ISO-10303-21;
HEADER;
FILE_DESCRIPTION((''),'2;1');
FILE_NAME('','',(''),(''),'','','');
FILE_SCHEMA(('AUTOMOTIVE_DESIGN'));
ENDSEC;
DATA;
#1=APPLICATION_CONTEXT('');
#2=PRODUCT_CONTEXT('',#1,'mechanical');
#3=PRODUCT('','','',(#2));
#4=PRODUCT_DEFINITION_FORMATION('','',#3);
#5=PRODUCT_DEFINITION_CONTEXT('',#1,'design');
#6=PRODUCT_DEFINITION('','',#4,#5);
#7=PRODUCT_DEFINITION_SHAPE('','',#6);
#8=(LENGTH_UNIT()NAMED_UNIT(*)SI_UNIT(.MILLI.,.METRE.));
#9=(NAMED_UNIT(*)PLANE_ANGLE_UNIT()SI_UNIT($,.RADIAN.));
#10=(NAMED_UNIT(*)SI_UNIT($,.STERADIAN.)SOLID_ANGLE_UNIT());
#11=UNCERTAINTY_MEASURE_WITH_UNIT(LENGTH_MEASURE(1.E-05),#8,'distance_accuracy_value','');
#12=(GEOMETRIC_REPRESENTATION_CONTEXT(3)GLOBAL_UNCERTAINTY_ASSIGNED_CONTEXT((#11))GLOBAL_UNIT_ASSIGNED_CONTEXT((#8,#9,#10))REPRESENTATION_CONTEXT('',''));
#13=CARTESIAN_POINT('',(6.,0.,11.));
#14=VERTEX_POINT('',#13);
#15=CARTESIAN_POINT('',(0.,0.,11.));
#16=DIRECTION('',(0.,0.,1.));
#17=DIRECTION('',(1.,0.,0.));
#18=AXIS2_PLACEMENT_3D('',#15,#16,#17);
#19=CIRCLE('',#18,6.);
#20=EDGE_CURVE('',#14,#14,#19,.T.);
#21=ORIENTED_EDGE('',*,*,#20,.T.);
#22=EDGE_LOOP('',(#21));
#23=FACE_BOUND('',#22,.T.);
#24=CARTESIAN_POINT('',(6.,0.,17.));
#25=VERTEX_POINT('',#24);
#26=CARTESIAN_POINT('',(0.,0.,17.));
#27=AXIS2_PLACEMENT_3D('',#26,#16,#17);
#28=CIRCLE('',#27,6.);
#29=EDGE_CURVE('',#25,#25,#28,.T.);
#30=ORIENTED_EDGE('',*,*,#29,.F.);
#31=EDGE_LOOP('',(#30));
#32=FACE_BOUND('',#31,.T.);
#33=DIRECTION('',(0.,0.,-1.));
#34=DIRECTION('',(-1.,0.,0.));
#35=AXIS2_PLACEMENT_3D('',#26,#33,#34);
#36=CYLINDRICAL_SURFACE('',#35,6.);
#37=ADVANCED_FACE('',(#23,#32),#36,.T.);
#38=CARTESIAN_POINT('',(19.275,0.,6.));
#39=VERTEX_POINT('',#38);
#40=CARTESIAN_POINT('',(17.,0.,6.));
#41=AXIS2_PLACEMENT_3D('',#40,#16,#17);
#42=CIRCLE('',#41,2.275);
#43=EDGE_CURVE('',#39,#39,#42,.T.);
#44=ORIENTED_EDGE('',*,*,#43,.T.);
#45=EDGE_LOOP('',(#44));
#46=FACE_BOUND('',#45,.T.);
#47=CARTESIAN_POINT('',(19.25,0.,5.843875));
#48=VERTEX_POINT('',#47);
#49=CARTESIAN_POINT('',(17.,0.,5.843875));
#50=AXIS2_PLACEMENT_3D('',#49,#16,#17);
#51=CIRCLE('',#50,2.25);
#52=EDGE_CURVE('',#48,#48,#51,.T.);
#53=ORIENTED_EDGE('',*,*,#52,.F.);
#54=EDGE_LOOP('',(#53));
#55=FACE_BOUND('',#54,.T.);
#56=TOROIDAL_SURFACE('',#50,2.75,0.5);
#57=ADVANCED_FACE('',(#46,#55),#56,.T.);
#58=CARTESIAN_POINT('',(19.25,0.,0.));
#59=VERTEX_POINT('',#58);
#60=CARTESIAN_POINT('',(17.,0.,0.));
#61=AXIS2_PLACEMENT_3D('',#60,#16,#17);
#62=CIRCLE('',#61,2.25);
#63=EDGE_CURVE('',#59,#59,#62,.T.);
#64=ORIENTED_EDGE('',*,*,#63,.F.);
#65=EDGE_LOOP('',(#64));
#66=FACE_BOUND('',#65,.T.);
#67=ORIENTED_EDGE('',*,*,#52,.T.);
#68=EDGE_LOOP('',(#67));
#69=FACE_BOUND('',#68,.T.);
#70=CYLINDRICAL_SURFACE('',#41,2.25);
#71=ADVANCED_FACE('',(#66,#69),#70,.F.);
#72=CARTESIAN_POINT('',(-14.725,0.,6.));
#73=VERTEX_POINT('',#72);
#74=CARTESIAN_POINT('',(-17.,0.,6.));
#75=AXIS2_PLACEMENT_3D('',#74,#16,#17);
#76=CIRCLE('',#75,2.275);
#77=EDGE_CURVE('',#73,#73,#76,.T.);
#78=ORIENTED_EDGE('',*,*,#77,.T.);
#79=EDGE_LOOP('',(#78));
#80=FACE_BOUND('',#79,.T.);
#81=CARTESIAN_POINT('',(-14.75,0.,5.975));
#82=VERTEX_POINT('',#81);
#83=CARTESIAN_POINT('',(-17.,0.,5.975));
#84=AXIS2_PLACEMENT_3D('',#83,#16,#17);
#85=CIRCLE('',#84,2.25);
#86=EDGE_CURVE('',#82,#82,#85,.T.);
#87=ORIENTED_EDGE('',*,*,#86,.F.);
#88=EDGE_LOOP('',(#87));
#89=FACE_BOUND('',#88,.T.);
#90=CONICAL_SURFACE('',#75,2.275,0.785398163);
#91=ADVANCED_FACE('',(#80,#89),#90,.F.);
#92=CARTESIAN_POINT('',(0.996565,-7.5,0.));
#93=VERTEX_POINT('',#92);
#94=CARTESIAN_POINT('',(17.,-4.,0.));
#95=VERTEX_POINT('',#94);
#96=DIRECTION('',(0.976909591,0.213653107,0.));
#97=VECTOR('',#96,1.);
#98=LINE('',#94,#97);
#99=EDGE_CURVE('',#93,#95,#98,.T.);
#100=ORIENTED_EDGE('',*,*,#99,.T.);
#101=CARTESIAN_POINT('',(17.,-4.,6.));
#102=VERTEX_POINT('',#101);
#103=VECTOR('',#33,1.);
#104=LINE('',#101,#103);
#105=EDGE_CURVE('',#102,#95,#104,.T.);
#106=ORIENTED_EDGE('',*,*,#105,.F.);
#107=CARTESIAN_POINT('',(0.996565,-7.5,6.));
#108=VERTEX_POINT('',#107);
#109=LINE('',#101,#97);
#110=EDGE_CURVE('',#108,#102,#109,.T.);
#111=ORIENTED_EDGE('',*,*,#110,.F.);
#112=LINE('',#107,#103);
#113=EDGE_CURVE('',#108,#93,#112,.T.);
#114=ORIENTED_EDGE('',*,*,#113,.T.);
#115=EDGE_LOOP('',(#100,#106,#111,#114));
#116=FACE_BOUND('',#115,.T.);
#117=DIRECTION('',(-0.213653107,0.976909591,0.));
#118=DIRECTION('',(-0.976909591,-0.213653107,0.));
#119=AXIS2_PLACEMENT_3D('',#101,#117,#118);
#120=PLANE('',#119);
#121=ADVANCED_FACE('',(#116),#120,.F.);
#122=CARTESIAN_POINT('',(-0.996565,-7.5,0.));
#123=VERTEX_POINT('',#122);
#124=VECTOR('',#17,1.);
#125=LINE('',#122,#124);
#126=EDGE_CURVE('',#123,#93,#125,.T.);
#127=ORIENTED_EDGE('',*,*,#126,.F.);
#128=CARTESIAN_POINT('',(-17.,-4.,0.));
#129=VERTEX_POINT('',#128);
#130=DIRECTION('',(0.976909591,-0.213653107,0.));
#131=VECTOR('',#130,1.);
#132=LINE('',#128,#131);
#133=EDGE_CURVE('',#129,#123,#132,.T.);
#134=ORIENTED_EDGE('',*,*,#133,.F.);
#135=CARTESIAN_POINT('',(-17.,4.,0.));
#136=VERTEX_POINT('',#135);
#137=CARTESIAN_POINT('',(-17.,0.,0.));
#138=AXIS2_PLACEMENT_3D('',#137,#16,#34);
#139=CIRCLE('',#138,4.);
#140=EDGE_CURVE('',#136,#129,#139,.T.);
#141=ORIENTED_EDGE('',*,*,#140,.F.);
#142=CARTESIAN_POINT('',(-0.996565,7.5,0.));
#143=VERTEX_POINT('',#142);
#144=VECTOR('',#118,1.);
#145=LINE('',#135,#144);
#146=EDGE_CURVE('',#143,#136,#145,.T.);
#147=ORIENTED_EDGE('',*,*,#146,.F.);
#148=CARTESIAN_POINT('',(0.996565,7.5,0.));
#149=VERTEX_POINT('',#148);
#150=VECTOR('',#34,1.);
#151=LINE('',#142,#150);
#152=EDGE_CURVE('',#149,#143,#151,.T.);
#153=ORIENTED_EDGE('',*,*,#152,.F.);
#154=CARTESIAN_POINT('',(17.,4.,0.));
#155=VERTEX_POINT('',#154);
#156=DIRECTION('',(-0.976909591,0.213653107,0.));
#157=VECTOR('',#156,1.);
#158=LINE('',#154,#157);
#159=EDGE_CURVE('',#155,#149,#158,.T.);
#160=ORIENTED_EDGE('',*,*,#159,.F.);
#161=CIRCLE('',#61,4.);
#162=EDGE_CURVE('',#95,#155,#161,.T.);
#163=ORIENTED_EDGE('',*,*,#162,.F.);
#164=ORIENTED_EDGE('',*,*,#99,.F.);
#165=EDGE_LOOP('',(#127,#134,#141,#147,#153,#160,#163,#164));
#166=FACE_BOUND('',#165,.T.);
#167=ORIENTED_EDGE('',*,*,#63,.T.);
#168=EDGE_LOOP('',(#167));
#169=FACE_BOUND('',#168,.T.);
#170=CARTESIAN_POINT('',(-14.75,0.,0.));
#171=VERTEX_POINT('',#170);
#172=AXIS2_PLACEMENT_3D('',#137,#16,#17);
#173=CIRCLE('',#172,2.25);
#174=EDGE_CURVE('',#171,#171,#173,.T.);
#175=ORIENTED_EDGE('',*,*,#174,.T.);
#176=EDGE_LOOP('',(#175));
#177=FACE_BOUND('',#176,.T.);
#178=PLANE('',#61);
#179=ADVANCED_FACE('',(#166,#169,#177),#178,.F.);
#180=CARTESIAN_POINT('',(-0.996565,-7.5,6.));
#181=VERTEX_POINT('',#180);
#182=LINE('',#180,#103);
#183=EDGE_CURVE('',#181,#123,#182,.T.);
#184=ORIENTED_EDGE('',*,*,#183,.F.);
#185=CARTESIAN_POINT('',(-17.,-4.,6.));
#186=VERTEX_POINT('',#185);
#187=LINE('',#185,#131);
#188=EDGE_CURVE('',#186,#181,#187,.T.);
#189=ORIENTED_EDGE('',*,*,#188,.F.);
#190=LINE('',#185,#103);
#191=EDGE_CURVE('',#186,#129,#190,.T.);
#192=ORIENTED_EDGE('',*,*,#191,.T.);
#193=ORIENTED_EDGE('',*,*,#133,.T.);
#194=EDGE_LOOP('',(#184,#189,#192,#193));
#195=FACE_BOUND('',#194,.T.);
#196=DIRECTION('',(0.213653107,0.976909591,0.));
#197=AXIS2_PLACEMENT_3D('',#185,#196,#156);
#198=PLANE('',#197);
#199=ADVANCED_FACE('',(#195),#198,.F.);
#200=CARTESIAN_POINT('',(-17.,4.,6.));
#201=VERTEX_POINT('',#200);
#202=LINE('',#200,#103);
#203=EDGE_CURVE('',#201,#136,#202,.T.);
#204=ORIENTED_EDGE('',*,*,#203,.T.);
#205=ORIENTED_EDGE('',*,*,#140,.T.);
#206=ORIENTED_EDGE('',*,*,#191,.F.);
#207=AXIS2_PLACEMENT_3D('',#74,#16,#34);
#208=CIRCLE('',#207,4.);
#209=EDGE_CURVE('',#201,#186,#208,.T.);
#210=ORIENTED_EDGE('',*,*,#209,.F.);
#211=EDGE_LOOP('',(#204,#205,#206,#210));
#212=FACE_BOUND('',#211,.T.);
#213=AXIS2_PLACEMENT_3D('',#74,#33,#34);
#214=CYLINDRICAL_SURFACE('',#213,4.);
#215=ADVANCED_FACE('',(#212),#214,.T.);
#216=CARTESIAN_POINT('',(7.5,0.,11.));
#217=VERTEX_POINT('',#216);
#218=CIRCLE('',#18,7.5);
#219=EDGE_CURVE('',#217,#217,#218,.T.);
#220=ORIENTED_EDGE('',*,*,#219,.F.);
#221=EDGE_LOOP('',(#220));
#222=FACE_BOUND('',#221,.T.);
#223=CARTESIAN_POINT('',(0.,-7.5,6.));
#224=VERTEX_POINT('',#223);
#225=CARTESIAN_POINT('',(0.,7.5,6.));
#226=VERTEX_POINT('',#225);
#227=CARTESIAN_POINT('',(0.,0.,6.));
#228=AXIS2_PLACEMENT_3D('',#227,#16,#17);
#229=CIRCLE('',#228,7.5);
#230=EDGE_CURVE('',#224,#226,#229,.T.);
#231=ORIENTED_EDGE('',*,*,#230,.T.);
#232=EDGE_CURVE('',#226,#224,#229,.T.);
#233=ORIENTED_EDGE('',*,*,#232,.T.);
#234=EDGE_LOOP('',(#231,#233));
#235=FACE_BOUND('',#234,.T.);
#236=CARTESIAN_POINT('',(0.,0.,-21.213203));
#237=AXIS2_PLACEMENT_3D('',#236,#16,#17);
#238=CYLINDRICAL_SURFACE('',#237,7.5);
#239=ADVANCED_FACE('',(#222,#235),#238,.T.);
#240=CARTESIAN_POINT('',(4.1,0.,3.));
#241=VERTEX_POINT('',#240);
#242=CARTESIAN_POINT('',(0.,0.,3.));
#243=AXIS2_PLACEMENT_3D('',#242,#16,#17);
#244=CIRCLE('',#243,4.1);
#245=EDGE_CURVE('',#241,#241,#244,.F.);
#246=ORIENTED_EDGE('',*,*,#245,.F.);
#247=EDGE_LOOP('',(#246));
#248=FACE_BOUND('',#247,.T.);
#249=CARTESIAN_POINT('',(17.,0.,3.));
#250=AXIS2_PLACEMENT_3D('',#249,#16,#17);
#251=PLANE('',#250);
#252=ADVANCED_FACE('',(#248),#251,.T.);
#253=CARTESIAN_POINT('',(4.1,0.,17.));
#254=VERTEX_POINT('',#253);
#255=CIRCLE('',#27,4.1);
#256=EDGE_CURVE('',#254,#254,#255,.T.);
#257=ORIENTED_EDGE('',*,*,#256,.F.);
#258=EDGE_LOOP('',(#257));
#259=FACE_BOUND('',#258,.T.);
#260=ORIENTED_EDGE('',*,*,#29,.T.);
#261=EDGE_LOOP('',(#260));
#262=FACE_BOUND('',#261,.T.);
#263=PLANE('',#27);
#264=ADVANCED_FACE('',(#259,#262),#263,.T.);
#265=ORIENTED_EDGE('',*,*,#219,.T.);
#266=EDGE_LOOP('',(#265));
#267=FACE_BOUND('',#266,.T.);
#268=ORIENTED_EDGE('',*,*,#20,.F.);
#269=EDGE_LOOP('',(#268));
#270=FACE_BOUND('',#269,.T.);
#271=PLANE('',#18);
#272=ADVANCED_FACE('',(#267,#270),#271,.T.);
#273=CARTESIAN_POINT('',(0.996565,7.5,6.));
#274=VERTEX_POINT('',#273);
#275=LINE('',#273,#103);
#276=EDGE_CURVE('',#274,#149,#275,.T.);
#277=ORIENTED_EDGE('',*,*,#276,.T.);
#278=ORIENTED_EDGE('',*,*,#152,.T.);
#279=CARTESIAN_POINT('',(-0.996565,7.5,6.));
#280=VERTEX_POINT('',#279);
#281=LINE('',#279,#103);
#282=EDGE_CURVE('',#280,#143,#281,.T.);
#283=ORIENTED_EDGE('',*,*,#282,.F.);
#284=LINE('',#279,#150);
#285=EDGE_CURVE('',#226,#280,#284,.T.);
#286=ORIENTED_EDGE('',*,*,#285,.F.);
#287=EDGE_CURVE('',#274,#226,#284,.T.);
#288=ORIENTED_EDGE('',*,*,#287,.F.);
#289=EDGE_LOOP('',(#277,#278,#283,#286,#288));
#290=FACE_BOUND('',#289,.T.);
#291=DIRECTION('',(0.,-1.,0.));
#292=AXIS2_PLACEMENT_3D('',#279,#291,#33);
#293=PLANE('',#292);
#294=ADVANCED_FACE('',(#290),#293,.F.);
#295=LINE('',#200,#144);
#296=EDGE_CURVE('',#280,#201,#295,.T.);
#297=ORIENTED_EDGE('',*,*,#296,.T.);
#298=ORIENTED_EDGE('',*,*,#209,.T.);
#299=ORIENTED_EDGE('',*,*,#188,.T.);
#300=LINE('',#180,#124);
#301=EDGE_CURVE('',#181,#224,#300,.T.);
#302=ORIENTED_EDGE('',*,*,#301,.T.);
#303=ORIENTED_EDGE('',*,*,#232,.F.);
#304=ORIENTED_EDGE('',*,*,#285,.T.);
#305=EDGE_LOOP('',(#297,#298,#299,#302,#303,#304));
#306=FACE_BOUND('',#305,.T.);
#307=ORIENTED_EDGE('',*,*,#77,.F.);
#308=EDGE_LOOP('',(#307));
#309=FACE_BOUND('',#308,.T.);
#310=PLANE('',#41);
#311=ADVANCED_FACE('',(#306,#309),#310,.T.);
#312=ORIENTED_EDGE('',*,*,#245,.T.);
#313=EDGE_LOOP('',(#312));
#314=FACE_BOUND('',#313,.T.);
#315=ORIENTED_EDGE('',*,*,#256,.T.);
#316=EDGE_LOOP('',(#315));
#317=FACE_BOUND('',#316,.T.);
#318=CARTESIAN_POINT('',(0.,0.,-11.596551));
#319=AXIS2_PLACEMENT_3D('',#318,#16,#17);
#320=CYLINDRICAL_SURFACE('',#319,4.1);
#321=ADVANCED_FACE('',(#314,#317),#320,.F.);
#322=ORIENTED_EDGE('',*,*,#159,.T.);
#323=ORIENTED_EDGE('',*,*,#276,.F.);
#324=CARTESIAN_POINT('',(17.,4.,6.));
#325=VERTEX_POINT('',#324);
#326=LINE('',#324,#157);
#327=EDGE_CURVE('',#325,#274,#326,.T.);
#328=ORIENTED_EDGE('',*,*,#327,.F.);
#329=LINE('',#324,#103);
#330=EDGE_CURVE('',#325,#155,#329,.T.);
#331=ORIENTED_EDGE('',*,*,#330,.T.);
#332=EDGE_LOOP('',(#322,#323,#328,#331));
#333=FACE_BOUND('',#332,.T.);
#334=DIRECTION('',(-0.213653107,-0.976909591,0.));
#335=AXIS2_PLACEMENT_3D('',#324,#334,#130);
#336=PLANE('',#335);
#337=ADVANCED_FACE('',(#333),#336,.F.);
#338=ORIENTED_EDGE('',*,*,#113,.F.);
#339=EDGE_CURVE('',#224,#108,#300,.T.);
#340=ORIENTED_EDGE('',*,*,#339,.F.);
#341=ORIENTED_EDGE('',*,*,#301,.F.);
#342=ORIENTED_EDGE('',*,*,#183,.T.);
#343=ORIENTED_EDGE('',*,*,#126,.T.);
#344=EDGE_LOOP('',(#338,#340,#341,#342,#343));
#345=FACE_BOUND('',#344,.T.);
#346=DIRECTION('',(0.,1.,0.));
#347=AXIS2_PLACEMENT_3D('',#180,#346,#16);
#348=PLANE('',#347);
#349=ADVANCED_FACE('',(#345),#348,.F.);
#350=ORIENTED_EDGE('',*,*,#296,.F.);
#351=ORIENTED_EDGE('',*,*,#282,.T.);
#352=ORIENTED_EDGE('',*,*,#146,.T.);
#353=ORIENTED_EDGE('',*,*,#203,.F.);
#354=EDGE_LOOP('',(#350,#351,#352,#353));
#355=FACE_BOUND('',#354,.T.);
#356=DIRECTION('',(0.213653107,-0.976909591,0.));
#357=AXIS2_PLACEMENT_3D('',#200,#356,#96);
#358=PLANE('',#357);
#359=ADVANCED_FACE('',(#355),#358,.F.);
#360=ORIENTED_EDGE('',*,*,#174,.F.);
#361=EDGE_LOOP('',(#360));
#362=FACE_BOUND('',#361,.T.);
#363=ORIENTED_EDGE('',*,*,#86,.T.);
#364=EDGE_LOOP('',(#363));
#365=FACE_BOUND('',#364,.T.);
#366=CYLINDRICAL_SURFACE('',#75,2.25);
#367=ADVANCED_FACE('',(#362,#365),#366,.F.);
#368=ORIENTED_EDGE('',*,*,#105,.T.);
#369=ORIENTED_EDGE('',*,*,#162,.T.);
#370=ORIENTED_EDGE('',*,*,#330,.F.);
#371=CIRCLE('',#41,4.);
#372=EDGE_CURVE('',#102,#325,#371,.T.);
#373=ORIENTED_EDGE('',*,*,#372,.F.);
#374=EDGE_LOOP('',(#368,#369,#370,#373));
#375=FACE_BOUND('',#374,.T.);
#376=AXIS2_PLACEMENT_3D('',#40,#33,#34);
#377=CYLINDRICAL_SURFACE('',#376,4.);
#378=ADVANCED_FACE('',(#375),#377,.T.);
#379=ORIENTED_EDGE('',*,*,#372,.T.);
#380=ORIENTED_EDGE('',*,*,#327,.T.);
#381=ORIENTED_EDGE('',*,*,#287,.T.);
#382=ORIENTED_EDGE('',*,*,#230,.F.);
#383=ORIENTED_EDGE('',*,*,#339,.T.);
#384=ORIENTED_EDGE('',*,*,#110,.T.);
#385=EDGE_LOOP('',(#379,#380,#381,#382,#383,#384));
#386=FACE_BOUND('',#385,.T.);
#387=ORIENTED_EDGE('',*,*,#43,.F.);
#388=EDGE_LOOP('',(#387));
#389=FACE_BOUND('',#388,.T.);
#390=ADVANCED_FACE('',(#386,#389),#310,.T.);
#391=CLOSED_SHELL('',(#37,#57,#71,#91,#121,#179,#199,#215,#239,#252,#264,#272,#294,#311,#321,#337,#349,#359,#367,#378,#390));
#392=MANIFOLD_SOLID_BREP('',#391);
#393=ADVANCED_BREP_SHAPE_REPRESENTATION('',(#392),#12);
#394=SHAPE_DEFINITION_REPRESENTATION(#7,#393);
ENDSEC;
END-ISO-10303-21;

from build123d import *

# Parameters (mm, degrees)
BOSS_EXTRUDE1_DEPTH            = 6
BOSS_EXTRUDE2_DEPTH            = 5
BOSS_EXTRUDE2_DEPTH_BACK       = 6
SKETCH2_R                      = 7.5
SKETCH3_R                      = 6
BOSS_EXTRUDE3_DEPTH            = 6
SKETCH4_R                      = 4.1
CUT_EXTRUDE1_DEPTH             = 14
M4_CLEARANCE_HOLE1_D           = 4.5
M4_CLEARANCE_HOLE1_CSINK_D     = 4.55
M4_CLEARANCE_HOLE1_CSINK_ANGLE = 90
FILLET4_R                      = 0.5


with BuildPart() as part:
    # Sketch1 → Boss-Extrude1 (new body)
    with BuildSketch(Plane.XY):
        with BuildLine():
            Line((17, 4), (0.996565203, 7.5))
            Line((0.996565203, 7.5), (-0.996565203, 7.5))
            Line((-0.996565203, 7.5), (-17, 4))
            ThreePointArc((-17, 4), (-21, 0), (-17, -4))
            Line((-17, -4), (-0.996565203, -7.5))
            Line((-0.996565203, -7.5), (0.996565203, -7.5))
            Line((0.996565203, -7.5), (17, -4))
            ThreePointArc((17, -4), (21, 0), (17, 4))
        make_face()
    extrude(amount=BOSS_EXTRUDE1_DEPTH)

    # Sketch2 → Boss-Extrude2 (add, two sides: drawn at the far end of the back side and taken through both)
    with BuildSketch(Plane.XY.offset(6).offset(-BOSS_EXTRUDE2_DEPTH_BACK)):
        Circle(SKETCH2_R)
    extrude(amount=BOSS_EXTRUDE2_DEPTH + BOSS_EXTRUDE2_DEPTH_BACK)

    # Sketch3 → Boss-Extrude3 (add)
    with BuildSketch(Plane.XY.offset(11)):
        Circle(SKETCH3_R)
    extrude(amount=BOSS_EXTRUDE3_DEPTH)

    # Sketch4 → Cut-Extrude1 (cut)
    with BuildSketch(Plane.XY.offset(17)):
        Circle(SKETCH4_R)
    extrude(amount=-CUT_EXTRUDE1_DEPTH, mode=Mode.SUBTRACT)

    # M4 Clearance Hole1 (through all)
    with Locations(Plane(origin=(17, 0, 6), x_dir=(1, 0, 0), z_dir=(0, 0, 1))):
        with Locations((0, 0), (-34, 0)):
            CounterSinkHole(M4_CLEARANCE_HOLE1_D / 2, M4_CLEARANCE_HOLE1_CSINK_D / 2, counter_sink_angle=M4_CLEARANCE_HOLE1_CSINK_ANGLE)

    # Fillet4
    # the kernel refuses this fillet: 0.5 mm, written as the material it takes off along each edge
    with BuildSketch(Plane(origin=(17, 0, 5.975), x_dir=(-1, 0, 0), z_dir=(0, -1, 0))) as fillet4_piece_1:
        with BuildLine():
            CenterArc((2.75, 0.13112495), FILLET4_R, 180, 18.194872339)
            Line((2.25, 0.13112495), (2.24, 0.13112495))
            Line((2.24, 0.13112495), (2.24, 0))
            Line((2.24, 0), (2.242928932, -0.007071068))
            ThreePointArc((2.242928932, -0.007071068), (2.255428932, -0.019571068), (2.2655, -0.028122499))
            Line((2.2655, -0.028122499), (2.275, -0.025))
        make_face()
    revolve(axis=Axis((17, 0, 5.975), (0, 0, -1)), mode=Mode.SUBTRACT)


solid = part.part
